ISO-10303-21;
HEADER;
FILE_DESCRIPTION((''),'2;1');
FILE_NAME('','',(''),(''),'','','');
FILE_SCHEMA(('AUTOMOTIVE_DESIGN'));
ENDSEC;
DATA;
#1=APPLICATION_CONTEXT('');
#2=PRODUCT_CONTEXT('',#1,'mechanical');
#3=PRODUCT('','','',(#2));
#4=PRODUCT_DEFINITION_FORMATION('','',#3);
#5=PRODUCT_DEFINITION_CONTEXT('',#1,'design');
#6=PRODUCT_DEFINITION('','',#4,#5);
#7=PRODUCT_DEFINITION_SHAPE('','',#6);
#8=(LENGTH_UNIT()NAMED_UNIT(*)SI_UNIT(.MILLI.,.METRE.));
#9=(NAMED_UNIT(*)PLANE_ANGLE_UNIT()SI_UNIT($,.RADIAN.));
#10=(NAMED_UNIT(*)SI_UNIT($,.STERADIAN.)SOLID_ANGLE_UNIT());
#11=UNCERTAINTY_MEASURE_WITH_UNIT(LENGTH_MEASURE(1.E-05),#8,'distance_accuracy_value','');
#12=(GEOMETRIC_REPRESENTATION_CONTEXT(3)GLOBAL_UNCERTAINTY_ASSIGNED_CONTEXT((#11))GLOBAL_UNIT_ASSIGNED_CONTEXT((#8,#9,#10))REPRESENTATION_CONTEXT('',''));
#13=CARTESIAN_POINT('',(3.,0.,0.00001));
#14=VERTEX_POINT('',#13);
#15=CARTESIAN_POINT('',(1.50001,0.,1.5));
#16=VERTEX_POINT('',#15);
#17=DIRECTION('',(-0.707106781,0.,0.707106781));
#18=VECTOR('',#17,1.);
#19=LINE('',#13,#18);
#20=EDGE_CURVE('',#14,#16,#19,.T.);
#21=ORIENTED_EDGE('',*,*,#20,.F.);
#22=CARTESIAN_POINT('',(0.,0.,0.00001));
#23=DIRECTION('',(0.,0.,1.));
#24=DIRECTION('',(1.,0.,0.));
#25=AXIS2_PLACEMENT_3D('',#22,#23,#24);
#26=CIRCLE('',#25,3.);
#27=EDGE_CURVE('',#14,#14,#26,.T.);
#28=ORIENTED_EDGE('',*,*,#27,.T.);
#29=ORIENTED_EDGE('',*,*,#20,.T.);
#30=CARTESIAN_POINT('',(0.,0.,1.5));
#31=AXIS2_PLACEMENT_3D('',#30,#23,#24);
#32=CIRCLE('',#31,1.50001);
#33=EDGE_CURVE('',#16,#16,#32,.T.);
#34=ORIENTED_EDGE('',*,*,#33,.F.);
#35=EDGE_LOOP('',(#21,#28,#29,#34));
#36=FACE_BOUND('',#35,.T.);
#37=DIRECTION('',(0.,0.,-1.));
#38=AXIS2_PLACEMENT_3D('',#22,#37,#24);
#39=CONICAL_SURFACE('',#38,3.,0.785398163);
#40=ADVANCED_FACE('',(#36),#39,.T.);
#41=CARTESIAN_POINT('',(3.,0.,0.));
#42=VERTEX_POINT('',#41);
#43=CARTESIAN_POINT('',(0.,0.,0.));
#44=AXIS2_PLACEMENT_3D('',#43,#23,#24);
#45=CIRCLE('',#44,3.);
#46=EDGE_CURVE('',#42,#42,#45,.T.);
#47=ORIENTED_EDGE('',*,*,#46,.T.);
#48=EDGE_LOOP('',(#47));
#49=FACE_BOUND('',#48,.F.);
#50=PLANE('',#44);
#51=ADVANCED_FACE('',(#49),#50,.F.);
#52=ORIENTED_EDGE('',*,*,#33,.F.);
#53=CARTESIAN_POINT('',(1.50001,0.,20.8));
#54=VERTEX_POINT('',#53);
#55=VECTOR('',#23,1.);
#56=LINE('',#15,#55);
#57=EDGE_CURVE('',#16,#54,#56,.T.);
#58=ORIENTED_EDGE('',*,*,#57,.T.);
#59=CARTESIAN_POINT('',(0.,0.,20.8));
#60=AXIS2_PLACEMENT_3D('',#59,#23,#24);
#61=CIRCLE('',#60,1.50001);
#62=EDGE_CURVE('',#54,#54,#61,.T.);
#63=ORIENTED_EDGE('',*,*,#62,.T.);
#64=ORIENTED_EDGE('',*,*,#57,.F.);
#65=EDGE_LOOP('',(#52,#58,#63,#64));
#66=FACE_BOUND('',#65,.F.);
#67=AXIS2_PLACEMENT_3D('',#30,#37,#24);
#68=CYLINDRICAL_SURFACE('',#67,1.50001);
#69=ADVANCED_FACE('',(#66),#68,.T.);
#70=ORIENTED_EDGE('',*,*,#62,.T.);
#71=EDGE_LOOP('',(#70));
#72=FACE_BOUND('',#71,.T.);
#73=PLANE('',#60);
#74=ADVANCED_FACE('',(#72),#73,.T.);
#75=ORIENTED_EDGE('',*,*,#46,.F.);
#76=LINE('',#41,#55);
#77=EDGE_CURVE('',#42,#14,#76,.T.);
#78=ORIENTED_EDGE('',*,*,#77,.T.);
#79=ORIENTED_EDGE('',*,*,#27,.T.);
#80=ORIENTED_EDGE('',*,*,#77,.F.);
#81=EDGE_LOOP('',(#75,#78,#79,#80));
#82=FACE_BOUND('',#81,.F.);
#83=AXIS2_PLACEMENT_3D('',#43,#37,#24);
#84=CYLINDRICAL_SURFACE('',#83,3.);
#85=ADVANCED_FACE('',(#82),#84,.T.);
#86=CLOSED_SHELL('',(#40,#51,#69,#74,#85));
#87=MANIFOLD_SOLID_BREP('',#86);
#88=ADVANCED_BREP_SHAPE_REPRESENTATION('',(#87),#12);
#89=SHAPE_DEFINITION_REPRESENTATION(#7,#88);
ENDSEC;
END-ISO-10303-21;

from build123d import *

# Parameters (mm, degrees)
F0_R     = 3
F1_DEPTH = 1.5
F2_SIZE  = 1.49999
F3_DEPTH = 19.3


# Not quite as in the source:
# - a fillet or chamfer is up to 0.001 mm smaller than in the source, because OpenCascade refuses the exact size


with BuildPart() as f1:
    # F0 (on Top) → F1 (new body)
    with BuildSketch(Plane.XY):
        Circle(F0_R)
    extrude(amount=F1_DEPTH)

    # F2 (size 1.5 in the source; OpenCascade refuses exactly that, so slightly less here)
    f2_edges = [f1.edges().sort_by_distance(p)[0] for p in [
        (-3, 0, 1.5),
    ]]
    chamfer(f2_edges, length=F2_SIZE)

    # F3 (add): a face of the model
    f3_faces = [f1.faces().sort_by_distance(p)[0] for p in [
        (0, 0, 1.5),
    ]]
    extrude(f3_faces, amount=F3_DEPTH)


solid = f1.part
